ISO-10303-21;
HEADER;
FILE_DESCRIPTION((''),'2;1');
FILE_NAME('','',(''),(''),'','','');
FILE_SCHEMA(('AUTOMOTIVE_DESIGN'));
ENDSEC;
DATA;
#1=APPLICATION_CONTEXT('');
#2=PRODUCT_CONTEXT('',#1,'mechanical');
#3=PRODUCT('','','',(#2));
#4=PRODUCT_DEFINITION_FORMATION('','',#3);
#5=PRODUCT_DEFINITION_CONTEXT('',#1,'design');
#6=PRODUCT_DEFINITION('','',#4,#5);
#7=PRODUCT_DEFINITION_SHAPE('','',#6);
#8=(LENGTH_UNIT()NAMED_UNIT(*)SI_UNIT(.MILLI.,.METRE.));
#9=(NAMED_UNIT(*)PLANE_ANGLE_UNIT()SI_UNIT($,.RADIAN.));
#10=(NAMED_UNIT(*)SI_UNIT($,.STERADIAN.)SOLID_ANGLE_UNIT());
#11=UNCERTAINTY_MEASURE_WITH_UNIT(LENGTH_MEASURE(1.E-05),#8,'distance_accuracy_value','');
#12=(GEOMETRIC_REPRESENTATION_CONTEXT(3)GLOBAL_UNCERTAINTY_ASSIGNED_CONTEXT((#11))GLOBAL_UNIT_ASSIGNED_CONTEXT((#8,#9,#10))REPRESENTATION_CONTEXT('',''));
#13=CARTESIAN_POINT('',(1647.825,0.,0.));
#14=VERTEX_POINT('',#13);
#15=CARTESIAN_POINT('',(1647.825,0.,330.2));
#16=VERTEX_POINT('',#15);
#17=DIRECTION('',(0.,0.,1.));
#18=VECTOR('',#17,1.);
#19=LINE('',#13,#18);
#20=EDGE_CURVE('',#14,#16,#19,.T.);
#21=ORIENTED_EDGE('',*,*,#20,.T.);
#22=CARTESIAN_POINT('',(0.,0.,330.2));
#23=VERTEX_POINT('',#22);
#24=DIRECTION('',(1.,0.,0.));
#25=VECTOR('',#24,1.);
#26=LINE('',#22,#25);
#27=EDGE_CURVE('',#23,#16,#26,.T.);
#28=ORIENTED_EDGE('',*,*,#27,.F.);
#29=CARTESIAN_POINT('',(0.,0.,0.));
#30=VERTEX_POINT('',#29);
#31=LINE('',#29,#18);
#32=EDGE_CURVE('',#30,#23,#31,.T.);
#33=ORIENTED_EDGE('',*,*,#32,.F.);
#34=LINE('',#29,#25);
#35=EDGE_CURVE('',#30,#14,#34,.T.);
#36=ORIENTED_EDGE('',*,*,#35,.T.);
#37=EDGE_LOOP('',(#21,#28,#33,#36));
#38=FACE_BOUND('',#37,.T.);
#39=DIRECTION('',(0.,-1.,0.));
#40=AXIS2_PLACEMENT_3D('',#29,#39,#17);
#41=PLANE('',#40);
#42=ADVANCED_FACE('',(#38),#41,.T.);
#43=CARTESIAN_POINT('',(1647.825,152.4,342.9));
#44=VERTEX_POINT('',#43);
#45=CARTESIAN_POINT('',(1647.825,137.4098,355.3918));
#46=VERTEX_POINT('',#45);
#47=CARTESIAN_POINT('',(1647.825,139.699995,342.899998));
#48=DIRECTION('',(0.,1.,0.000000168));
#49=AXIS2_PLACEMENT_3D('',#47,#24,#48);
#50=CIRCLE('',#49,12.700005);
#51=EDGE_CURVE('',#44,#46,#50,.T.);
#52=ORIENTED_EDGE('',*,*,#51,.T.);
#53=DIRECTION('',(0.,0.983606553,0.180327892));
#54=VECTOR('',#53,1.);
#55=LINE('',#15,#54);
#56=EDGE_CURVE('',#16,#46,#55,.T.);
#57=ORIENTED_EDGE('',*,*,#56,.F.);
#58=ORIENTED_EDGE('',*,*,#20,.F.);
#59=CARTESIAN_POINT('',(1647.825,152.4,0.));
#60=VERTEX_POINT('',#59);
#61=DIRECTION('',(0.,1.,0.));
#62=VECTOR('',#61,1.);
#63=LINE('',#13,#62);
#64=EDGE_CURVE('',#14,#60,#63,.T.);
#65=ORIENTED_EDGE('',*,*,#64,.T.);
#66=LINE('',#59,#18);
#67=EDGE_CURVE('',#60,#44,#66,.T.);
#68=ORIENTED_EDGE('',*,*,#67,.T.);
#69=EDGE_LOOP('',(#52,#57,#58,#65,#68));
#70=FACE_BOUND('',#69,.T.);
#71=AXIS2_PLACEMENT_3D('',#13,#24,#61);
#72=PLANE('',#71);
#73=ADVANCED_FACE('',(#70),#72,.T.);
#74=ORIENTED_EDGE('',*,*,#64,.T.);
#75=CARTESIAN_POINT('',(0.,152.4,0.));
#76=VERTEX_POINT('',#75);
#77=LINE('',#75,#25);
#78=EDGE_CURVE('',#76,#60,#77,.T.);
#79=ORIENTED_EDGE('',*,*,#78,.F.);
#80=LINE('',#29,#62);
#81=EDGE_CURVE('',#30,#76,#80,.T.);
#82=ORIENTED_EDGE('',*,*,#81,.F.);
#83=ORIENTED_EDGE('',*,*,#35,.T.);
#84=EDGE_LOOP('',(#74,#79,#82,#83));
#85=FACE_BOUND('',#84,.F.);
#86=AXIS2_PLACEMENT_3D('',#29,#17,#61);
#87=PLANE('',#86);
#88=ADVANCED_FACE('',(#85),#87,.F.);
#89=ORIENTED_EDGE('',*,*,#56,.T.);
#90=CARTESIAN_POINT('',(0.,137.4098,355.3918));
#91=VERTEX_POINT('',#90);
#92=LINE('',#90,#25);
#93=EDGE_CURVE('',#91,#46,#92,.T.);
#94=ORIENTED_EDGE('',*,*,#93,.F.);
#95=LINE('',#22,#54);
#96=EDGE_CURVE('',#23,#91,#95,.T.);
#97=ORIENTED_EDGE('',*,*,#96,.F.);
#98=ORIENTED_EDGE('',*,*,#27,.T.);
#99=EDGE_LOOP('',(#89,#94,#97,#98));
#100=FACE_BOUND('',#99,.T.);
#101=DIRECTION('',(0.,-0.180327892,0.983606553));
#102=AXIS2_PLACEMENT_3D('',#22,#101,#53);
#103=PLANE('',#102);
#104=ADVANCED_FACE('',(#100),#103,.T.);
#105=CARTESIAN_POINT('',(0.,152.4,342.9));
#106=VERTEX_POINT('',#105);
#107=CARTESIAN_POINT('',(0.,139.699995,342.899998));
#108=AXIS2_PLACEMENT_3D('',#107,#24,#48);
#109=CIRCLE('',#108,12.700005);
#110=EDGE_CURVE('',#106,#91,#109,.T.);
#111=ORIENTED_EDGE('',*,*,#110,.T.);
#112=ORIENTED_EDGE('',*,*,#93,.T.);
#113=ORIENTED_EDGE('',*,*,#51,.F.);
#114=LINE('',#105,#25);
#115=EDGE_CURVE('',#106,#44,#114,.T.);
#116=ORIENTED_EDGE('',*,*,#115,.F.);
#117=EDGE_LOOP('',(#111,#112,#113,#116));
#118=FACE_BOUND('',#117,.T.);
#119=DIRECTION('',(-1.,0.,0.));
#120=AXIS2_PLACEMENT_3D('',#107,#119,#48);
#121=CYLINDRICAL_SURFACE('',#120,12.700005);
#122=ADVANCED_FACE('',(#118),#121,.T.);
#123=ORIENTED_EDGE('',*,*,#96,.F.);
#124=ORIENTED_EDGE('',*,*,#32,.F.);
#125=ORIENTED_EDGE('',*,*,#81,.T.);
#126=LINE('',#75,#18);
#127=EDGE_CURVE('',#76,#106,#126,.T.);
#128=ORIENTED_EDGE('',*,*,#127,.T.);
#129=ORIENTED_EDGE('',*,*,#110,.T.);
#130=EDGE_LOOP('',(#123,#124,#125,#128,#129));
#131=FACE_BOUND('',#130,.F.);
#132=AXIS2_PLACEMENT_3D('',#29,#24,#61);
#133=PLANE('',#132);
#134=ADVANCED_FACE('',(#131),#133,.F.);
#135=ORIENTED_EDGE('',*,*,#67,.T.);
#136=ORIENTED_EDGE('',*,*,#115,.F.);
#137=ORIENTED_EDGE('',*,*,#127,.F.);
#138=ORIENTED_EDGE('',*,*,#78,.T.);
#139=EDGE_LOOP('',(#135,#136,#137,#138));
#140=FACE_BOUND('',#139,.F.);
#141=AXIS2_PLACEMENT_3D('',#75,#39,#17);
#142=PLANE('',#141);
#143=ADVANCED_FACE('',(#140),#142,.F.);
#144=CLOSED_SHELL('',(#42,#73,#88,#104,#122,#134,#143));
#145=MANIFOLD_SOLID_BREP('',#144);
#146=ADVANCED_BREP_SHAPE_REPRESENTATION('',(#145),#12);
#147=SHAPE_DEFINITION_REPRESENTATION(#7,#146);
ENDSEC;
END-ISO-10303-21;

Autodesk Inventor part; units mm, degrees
ref_plane "YZ Plane" through (0, 0, 0) normal (1, 0, 0) x (0, 1, 0)
ref_plane "XZ Plane" through (0, 0, 0) normal (0, 1, 0) x (-1, 0, 0)
ref_plane "XY Plane" through (0, 0, 0) normal (0, 0, 1) x (1, 0, 0)
sketch "Profile" plane through (0, 0, 0) normal (0, 0, 1) x (1, 0, 0)
  line L0 (0, 0) -> (0, 330.2)
  line L1 (0, 0) -> (152.4, 0)
  line L2 (152.4, 0) -> (152.4, 342.9)
  line L3 (152.4, 342.9) -> (139.7, 342.9) construction
  line L4 (152.4, 342.9) -> (139.7, 342.9) construction
  arc A0 (152.4, 342.9) -> (137.4098, 355.3918) centre (139.7, 342.9) ccw
  line L5 (0, 330.2) -> (137.4098, 355.3918)
  dimension "d0" = 330.2
  dimension "d1" = 152.4
  dimension "d2" = 342.9
  dimension "d3" = 12.7
  dimension "d4" = 12.7
sketch "Sketch1" plane through (0, 0, 0) normal (1, 0, 0) x (0, 1, 0)
  line L0 (0, 0) -> (0, 330.2)
  line L1 (0, 0) -> (152.4, 0)
  line L2 (152.4, 0) -> (152.4, 342.9)
  line L3 (152.4, 342.9) -> (139.7, 342.9) construction
  line L4 (152.4, 342.9) -> (139.7, 342.9) construction
  arc A0 (152.4, 342.9) -> (137.4098, 355.3918) centre (139.7, 342.9) ccw
  line L5 (0, 330.2) -> (137.4098, 355.3918)
extrude "Extrusion1" add sketch "Sketch1" along normal blind 1647.825
properties part number "D" material "Granite, Cut, Polished"
